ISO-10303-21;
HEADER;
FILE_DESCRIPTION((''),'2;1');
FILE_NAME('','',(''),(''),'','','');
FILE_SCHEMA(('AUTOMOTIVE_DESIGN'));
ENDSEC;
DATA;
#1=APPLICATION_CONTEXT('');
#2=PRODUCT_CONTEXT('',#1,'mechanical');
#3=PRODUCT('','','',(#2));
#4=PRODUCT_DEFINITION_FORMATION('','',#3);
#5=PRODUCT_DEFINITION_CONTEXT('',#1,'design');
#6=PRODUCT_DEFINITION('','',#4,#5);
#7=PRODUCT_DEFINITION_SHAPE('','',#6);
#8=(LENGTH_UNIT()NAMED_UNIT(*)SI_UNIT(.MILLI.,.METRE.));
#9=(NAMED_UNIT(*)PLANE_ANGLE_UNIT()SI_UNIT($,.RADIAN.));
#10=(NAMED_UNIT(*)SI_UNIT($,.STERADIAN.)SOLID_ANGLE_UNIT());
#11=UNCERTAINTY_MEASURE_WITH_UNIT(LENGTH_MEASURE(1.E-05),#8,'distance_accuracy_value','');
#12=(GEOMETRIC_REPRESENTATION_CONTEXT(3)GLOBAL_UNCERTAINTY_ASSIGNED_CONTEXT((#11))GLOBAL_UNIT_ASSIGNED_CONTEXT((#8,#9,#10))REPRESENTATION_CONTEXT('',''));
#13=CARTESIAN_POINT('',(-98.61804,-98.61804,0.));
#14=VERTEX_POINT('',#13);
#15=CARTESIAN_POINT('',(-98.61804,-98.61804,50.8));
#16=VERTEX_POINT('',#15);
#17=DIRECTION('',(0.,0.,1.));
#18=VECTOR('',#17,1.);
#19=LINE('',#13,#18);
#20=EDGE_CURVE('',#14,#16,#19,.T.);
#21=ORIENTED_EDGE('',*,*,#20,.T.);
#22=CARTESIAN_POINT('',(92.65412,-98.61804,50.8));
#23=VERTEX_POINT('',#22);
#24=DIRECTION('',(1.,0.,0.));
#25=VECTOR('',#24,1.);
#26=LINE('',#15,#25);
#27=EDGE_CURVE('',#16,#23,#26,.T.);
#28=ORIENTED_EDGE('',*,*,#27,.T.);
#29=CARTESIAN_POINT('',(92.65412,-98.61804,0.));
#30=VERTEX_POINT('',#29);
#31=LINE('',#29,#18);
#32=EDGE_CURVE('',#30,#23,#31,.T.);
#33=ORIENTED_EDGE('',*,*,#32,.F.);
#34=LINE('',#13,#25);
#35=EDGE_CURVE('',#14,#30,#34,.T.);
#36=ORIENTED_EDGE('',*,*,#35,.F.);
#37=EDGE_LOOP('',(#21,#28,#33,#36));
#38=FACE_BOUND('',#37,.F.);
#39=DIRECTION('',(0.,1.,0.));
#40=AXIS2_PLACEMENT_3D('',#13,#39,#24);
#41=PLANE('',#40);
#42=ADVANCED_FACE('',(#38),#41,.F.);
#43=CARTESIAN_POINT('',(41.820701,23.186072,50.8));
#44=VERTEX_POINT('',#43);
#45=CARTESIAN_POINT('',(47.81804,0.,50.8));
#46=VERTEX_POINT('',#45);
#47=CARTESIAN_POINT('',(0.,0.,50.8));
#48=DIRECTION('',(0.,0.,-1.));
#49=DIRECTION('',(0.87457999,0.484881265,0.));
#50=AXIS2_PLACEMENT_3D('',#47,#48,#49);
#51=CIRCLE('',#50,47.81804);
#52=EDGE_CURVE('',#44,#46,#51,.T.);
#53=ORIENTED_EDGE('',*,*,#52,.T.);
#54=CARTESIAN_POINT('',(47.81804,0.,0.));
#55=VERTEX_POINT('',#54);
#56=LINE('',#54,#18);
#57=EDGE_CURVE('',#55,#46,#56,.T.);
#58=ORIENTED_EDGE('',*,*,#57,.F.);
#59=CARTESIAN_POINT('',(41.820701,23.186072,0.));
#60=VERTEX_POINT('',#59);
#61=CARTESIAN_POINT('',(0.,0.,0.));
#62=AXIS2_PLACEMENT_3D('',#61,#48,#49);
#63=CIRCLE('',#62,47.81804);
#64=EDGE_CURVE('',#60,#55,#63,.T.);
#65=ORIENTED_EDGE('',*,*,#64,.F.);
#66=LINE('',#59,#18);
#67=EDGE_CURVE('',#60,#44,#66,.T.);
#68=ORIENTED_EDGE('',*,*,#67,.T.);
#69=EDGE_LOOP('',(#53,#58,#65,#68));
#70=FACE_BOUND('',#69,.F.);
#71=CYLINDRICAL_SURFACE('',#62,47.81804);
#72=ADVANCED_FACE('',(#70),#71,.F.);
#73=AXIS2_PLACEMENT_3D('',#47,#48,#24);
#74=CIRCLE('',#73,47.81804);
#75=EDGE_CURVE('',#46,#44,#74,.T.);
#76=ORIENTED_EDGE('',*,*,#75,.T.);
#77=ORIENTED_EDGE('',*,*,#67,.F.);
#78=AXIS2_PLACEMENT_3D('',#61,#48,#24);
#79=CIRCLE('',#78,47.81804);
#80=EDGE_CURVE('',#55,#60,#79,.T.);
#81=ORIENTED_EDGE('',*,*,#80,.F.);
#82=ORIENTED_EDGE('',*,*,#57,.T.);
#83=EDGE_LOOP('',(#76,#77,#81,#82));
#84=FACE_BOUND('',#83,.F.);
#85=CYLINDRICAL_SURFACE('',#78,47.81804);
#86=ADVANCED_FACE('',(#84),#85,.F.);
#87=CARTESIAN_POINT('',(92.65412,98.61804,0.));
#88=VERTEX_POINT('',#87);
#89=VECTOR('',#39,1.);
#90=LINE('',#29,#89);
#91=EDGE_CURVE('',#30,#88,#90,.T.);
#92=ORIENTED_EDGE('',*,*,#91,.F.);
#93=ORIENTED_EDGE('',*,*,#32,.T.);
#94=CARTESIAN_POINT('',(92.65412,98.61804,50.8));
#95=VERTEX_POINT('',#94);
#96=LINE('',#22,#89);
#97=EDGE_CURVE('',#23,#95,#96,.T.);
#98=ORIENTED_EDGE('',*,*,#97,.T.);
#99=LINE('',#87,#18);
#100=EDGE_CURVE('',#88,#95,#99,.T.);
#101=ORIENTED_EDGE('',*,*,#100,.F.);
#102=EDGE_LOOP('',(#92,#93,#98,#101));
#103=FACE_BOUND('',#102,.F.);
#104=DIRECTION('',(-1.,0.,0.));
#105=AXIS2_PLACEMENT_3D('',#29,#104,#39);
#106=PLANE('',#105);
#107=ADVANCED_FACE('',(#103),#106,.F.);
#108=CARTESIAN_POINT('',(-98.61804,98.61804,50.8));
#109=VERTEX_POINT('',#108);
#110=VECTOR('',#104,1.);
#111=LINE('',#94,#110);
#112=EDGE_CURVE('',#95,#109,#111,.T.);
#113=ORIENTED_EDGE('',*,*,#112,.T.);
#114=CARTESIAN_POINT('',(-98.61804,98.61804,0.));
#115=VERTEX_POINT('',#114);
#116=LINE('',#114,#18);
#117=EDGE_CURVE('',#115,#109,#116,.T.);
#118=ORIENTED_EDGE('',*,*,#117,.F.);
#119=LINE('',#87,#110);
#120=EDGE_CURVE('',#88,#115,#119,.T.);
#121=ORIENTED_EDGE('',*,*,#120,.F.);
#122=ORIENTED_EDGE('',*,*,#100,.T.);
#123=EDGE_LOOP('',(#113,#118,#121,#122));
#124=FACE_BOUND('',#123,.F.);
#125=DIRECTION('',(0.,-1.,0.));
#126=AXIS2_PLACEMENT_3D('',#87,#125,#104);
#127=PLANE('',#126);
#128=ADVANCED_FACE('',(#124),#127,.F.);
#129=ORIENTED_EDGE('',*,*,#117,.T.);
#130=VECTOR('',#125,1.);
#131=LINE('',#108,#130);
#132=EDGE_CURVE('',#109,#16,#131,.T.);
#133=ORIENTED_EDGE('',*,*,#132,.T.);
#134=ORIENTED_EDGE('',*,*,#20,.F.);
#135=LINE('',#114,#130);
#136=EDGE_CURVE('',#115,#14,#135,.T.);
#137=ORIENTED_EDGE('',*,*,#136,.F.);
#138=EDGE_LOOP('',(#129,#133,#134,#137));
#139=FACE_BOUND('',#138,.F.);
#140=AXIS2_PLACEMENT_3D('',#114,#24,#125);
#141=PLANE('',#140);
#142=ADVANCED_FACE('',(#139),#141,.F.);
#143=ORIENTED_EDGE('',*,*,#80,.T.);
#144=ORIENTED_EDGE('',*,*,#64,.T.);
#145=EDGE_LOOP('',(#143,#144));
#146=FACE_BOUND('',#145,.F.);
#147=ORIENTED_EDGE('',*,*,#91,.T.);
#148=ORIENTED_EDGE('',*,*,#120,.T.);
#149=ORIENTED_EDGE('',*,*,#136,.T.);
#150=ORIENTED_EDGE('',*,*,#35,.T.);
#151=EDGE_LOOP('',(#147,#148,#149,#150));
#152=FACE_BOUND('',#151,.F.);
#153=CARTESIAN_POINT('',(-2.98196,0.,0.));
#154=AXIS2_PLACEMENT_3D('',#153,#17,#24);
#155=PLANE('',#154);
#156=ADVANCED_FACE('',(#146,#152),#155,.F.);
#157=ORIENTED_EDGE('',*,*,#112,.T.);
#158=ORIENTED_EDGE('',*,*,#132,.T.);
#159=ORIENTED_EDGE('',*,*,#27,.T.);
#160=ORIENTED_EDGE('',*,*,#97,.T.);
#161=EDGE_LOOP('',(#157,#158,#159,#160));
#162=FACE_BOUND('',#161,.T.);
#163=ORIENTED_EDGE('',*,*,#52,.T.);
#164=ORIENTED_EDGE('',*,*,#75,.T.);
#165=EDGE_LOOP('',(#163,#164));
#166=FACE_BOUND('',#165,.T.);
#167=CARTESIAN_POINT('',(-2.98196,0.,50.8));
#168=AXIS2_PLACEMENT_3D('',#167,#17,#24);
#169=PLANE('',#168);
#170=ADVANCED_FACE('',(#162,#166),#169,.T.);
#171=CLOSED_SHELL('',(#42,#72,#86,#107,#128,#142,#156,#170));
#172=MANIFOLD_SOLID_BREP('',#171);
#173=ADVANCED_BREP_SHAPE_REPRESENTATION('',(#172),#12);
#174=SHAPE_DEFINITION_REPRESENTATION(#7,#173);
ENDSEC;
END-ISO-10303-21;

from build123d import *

# Parameters (mm, degrees)
F2_DEPTH = 50.8


# Not quite as in the source:
# - a variable given as a bare number and used for a length is read in inches; the dataset says mm whatever the document's units were


with BuildPart() as f2:
    # F1 (on Top) → F2 (new body)
    with BuildSketch(Plane.XY):
        Polygon((0, 98.61804), (-98.61804, 98.61804), (-98.61804, -98.61804), (92.65412, -98.61804), (92.65412, 98.61804), align=None)
        with BuildLine():
            ThreePointArc((47.81804, 0), (-46.2944321696, -11.9745772173), (41.82070094, 23.1860717313))
            ThreePointArc((41.82070094, 23.1860717313), (46.2944321696, 11.9745772173), (47.81804, 0))
        make_face(mode=Mode.SUBTRACT)
    extrude(amount=F2_DEPTH)


solid = f2.part
